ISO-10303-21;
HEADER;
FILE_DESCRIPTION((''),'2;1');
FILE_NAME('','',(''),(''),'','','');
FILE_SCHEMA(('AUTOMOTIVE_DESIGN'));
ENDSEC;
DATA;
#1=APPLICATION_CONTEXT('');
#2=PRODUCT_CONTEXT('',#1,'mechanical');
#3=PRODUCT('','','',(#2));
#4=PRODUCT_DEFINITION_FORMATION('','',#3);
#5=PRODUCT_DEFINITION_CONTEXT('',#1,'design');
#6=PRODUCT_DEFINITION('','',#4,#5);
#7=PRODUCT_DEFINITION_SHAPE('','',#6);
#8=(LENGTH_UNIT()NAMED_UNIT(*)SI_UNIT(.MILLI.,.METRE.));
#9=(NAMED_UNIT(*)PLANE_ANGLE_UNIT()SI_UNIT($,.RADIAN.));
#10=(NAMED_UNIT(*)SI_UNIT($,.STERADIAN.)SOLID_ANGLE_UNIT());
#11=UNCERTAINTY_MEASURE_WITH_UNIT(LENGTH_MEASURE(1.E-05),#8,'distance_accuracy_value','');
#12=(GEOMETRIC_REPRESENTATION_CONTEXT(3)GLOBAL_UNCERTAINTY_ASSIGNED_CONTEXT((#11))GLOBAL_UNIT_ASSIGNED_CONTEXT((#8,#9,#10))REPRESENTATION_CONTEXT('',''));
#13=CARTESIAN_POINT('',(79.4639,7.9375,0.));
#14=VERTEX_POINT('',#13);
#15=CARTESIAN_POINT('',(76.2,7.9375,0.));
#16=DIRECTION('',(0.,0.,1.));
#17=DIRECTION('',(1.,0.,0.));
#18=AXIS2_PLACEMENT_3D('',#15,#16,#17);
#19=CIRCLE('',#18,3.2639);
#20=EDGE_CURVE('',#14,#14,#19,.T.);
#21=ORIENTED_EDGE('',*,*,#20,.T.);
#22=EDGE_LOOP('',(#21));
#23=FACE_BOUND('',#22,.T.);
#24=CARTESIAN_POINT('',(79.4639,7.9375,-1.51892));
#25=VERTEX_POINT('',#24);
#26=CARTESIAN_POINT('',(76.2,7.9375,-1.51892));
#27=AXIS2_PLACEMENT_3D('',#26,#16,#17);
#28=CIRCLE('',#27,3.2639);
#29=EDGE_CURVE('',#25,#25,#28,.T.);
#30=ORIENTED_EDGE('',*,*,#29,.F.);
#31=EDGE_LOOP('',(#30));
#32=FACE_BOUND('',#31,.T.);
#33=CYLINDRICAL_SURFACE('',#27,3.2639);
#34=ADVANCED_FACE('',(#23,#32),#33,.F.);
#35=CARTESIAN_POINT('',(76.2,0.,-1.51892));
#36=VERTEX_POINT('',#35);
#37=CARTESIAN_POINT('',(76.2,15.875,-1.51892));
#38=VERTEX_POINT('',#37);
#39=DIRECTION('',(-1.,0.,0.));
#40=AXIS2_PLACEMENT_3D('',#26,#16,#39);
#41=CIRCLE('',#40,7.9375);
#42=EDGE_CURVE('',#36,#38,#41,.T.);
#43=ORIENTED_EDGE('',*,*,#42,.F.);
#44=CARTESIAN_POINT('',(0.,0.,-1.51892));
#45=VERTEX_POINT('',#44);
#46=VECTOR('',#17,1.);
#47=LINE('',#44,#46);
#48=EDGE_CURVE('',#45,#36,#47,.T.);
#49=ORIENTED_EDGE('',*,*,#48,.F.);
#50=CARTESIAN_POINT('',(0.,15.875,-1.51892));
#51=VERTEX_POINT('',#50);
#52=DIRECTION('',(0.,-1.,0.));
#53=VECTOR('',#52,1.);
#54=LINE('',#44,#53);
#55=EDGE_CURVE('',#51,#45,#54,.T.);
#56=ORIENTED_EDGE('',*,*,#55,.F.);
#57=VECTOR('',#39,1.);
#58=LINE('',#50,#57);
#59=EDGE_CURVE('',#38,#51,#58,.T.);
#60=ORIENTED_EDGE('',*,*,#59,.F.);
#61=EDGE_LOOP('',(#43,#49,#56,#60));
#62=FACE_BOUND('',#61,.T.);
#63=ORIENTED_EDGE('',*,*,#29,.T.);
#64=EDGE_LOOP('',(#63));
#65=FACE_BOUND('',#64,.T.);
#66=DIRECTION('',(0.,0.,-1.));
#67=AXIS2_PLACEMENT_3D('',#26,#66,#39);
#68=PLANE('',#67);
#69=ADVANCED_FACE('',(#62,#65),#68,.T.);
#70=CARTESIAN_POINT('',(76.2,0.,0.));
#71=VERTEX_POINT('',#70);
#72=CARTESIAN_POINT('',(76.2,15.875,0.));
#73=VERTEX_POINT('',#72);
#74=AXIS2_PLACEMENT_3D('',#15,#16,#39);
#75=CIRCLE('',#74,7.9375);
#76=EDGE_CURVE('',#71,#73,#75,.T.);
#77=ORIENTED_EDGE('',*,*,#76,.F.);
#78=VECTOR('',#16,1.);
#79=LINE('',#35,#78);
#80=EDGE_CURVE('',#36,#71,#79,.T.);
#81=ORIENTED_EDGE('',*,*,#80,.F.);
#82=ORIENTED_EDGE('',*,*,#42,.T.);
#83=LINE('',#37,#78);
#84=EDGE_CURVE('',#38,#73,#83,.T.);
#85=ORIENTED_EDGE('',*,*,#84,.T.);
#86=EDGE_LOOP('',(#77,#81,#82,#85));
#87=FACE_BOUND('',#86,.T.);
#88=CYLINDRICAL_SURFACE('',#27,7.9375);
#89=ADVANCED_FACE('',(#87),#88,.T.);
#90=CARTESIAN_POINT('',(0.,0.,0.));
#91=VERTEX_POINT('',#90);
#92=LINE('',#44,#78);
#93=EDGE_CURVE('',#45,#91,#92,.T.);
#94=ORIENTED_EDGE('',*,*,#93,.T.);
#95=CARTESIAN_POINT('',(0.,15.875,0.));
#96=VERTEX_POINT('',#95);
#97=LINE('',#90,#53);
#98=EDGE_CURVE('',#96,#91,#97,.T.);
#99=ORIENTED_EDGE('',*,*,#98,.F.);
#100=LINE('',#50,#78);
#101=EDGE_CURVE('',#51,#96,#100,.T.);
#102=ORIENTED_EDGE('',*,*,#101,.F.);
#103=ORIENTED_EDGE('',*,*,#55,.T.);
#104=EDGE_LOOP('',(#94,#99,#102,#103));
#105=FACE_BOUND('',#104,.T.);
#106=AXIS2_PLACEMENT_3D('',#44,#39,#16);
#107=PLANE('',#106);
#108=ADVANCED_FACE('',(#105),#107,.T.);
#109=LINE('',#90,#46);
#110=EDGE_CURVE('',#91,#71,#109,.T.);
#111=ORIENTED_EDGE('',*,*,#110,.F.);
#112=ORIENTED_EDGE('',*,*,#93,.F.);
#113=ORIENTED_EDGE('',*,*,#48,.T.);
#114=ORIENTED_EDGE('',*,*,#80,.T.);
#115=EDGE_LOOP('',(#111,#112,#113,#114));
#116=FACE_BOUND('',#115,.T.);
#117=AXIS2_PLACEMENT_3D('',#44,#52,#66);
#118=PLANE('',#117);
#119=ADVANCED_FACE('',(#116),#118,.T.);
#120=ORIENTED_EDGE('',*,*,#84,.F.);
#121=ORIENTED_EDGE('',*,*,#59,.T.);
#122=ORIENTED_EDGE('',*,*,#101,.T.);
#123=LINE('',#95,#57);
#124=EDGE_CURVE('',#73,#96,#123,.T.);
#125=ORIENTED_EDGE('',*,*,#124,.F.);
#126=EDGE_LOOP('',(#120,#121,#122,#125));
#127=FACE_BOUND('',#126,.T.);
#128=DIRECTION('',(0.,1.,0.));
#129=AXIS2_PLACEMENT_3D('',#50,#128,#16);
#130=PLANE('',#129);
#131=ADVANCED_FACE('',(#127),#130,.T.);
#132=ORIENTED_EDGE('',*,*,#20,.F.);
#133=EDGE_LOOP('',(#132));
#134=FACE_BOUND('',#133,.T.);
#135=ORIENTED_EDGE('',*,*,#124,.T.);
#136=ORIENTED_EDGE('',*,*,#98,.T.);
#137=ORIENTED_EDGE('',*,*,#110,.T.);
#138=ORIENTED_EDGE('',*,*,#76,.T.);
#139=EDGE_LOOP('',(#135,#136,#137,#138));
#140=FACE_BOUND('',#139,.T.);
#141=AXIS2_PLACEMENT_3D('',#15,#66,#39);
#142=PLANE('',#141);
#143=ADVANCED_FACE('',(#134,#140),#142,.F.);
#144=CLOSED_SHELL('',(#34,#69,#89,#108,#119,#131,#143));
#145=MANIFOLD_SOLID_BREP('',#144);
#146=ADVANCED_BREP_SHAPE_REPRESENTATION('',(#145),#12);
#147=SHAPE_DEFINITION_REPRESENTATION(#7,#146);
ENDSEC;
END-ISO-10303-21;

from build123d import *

# Parameters (mm, degrees)
SKETCH1_R          = 3.2639
BASE_FLANGE1_DEPTH = 1.51892


# Sheet-metal steps are written as plain solids
with BuildPart() as part:
    # Sketch1 → Base-Flange1 (new body)
    with BuildSketch(Plane.XY):
        with BuildLine():
            Line((0, 0), (76.2, 0))
            ThreePointArc((76.2, 0), (84.1375, 7.9375), (76.2, 15.875))
            Line((76.2, 15.875), (0, 15.875))
            Line((0, 15.875), (0, 0))
        make_face()
        with Locations((76.2, 7.9375)):
            Circle(SKETCH1_R, mode=Mode.SUBTRACT)
    extrude(amount=-BASE_FLANGE1_DEPTH)


solid = part.part
